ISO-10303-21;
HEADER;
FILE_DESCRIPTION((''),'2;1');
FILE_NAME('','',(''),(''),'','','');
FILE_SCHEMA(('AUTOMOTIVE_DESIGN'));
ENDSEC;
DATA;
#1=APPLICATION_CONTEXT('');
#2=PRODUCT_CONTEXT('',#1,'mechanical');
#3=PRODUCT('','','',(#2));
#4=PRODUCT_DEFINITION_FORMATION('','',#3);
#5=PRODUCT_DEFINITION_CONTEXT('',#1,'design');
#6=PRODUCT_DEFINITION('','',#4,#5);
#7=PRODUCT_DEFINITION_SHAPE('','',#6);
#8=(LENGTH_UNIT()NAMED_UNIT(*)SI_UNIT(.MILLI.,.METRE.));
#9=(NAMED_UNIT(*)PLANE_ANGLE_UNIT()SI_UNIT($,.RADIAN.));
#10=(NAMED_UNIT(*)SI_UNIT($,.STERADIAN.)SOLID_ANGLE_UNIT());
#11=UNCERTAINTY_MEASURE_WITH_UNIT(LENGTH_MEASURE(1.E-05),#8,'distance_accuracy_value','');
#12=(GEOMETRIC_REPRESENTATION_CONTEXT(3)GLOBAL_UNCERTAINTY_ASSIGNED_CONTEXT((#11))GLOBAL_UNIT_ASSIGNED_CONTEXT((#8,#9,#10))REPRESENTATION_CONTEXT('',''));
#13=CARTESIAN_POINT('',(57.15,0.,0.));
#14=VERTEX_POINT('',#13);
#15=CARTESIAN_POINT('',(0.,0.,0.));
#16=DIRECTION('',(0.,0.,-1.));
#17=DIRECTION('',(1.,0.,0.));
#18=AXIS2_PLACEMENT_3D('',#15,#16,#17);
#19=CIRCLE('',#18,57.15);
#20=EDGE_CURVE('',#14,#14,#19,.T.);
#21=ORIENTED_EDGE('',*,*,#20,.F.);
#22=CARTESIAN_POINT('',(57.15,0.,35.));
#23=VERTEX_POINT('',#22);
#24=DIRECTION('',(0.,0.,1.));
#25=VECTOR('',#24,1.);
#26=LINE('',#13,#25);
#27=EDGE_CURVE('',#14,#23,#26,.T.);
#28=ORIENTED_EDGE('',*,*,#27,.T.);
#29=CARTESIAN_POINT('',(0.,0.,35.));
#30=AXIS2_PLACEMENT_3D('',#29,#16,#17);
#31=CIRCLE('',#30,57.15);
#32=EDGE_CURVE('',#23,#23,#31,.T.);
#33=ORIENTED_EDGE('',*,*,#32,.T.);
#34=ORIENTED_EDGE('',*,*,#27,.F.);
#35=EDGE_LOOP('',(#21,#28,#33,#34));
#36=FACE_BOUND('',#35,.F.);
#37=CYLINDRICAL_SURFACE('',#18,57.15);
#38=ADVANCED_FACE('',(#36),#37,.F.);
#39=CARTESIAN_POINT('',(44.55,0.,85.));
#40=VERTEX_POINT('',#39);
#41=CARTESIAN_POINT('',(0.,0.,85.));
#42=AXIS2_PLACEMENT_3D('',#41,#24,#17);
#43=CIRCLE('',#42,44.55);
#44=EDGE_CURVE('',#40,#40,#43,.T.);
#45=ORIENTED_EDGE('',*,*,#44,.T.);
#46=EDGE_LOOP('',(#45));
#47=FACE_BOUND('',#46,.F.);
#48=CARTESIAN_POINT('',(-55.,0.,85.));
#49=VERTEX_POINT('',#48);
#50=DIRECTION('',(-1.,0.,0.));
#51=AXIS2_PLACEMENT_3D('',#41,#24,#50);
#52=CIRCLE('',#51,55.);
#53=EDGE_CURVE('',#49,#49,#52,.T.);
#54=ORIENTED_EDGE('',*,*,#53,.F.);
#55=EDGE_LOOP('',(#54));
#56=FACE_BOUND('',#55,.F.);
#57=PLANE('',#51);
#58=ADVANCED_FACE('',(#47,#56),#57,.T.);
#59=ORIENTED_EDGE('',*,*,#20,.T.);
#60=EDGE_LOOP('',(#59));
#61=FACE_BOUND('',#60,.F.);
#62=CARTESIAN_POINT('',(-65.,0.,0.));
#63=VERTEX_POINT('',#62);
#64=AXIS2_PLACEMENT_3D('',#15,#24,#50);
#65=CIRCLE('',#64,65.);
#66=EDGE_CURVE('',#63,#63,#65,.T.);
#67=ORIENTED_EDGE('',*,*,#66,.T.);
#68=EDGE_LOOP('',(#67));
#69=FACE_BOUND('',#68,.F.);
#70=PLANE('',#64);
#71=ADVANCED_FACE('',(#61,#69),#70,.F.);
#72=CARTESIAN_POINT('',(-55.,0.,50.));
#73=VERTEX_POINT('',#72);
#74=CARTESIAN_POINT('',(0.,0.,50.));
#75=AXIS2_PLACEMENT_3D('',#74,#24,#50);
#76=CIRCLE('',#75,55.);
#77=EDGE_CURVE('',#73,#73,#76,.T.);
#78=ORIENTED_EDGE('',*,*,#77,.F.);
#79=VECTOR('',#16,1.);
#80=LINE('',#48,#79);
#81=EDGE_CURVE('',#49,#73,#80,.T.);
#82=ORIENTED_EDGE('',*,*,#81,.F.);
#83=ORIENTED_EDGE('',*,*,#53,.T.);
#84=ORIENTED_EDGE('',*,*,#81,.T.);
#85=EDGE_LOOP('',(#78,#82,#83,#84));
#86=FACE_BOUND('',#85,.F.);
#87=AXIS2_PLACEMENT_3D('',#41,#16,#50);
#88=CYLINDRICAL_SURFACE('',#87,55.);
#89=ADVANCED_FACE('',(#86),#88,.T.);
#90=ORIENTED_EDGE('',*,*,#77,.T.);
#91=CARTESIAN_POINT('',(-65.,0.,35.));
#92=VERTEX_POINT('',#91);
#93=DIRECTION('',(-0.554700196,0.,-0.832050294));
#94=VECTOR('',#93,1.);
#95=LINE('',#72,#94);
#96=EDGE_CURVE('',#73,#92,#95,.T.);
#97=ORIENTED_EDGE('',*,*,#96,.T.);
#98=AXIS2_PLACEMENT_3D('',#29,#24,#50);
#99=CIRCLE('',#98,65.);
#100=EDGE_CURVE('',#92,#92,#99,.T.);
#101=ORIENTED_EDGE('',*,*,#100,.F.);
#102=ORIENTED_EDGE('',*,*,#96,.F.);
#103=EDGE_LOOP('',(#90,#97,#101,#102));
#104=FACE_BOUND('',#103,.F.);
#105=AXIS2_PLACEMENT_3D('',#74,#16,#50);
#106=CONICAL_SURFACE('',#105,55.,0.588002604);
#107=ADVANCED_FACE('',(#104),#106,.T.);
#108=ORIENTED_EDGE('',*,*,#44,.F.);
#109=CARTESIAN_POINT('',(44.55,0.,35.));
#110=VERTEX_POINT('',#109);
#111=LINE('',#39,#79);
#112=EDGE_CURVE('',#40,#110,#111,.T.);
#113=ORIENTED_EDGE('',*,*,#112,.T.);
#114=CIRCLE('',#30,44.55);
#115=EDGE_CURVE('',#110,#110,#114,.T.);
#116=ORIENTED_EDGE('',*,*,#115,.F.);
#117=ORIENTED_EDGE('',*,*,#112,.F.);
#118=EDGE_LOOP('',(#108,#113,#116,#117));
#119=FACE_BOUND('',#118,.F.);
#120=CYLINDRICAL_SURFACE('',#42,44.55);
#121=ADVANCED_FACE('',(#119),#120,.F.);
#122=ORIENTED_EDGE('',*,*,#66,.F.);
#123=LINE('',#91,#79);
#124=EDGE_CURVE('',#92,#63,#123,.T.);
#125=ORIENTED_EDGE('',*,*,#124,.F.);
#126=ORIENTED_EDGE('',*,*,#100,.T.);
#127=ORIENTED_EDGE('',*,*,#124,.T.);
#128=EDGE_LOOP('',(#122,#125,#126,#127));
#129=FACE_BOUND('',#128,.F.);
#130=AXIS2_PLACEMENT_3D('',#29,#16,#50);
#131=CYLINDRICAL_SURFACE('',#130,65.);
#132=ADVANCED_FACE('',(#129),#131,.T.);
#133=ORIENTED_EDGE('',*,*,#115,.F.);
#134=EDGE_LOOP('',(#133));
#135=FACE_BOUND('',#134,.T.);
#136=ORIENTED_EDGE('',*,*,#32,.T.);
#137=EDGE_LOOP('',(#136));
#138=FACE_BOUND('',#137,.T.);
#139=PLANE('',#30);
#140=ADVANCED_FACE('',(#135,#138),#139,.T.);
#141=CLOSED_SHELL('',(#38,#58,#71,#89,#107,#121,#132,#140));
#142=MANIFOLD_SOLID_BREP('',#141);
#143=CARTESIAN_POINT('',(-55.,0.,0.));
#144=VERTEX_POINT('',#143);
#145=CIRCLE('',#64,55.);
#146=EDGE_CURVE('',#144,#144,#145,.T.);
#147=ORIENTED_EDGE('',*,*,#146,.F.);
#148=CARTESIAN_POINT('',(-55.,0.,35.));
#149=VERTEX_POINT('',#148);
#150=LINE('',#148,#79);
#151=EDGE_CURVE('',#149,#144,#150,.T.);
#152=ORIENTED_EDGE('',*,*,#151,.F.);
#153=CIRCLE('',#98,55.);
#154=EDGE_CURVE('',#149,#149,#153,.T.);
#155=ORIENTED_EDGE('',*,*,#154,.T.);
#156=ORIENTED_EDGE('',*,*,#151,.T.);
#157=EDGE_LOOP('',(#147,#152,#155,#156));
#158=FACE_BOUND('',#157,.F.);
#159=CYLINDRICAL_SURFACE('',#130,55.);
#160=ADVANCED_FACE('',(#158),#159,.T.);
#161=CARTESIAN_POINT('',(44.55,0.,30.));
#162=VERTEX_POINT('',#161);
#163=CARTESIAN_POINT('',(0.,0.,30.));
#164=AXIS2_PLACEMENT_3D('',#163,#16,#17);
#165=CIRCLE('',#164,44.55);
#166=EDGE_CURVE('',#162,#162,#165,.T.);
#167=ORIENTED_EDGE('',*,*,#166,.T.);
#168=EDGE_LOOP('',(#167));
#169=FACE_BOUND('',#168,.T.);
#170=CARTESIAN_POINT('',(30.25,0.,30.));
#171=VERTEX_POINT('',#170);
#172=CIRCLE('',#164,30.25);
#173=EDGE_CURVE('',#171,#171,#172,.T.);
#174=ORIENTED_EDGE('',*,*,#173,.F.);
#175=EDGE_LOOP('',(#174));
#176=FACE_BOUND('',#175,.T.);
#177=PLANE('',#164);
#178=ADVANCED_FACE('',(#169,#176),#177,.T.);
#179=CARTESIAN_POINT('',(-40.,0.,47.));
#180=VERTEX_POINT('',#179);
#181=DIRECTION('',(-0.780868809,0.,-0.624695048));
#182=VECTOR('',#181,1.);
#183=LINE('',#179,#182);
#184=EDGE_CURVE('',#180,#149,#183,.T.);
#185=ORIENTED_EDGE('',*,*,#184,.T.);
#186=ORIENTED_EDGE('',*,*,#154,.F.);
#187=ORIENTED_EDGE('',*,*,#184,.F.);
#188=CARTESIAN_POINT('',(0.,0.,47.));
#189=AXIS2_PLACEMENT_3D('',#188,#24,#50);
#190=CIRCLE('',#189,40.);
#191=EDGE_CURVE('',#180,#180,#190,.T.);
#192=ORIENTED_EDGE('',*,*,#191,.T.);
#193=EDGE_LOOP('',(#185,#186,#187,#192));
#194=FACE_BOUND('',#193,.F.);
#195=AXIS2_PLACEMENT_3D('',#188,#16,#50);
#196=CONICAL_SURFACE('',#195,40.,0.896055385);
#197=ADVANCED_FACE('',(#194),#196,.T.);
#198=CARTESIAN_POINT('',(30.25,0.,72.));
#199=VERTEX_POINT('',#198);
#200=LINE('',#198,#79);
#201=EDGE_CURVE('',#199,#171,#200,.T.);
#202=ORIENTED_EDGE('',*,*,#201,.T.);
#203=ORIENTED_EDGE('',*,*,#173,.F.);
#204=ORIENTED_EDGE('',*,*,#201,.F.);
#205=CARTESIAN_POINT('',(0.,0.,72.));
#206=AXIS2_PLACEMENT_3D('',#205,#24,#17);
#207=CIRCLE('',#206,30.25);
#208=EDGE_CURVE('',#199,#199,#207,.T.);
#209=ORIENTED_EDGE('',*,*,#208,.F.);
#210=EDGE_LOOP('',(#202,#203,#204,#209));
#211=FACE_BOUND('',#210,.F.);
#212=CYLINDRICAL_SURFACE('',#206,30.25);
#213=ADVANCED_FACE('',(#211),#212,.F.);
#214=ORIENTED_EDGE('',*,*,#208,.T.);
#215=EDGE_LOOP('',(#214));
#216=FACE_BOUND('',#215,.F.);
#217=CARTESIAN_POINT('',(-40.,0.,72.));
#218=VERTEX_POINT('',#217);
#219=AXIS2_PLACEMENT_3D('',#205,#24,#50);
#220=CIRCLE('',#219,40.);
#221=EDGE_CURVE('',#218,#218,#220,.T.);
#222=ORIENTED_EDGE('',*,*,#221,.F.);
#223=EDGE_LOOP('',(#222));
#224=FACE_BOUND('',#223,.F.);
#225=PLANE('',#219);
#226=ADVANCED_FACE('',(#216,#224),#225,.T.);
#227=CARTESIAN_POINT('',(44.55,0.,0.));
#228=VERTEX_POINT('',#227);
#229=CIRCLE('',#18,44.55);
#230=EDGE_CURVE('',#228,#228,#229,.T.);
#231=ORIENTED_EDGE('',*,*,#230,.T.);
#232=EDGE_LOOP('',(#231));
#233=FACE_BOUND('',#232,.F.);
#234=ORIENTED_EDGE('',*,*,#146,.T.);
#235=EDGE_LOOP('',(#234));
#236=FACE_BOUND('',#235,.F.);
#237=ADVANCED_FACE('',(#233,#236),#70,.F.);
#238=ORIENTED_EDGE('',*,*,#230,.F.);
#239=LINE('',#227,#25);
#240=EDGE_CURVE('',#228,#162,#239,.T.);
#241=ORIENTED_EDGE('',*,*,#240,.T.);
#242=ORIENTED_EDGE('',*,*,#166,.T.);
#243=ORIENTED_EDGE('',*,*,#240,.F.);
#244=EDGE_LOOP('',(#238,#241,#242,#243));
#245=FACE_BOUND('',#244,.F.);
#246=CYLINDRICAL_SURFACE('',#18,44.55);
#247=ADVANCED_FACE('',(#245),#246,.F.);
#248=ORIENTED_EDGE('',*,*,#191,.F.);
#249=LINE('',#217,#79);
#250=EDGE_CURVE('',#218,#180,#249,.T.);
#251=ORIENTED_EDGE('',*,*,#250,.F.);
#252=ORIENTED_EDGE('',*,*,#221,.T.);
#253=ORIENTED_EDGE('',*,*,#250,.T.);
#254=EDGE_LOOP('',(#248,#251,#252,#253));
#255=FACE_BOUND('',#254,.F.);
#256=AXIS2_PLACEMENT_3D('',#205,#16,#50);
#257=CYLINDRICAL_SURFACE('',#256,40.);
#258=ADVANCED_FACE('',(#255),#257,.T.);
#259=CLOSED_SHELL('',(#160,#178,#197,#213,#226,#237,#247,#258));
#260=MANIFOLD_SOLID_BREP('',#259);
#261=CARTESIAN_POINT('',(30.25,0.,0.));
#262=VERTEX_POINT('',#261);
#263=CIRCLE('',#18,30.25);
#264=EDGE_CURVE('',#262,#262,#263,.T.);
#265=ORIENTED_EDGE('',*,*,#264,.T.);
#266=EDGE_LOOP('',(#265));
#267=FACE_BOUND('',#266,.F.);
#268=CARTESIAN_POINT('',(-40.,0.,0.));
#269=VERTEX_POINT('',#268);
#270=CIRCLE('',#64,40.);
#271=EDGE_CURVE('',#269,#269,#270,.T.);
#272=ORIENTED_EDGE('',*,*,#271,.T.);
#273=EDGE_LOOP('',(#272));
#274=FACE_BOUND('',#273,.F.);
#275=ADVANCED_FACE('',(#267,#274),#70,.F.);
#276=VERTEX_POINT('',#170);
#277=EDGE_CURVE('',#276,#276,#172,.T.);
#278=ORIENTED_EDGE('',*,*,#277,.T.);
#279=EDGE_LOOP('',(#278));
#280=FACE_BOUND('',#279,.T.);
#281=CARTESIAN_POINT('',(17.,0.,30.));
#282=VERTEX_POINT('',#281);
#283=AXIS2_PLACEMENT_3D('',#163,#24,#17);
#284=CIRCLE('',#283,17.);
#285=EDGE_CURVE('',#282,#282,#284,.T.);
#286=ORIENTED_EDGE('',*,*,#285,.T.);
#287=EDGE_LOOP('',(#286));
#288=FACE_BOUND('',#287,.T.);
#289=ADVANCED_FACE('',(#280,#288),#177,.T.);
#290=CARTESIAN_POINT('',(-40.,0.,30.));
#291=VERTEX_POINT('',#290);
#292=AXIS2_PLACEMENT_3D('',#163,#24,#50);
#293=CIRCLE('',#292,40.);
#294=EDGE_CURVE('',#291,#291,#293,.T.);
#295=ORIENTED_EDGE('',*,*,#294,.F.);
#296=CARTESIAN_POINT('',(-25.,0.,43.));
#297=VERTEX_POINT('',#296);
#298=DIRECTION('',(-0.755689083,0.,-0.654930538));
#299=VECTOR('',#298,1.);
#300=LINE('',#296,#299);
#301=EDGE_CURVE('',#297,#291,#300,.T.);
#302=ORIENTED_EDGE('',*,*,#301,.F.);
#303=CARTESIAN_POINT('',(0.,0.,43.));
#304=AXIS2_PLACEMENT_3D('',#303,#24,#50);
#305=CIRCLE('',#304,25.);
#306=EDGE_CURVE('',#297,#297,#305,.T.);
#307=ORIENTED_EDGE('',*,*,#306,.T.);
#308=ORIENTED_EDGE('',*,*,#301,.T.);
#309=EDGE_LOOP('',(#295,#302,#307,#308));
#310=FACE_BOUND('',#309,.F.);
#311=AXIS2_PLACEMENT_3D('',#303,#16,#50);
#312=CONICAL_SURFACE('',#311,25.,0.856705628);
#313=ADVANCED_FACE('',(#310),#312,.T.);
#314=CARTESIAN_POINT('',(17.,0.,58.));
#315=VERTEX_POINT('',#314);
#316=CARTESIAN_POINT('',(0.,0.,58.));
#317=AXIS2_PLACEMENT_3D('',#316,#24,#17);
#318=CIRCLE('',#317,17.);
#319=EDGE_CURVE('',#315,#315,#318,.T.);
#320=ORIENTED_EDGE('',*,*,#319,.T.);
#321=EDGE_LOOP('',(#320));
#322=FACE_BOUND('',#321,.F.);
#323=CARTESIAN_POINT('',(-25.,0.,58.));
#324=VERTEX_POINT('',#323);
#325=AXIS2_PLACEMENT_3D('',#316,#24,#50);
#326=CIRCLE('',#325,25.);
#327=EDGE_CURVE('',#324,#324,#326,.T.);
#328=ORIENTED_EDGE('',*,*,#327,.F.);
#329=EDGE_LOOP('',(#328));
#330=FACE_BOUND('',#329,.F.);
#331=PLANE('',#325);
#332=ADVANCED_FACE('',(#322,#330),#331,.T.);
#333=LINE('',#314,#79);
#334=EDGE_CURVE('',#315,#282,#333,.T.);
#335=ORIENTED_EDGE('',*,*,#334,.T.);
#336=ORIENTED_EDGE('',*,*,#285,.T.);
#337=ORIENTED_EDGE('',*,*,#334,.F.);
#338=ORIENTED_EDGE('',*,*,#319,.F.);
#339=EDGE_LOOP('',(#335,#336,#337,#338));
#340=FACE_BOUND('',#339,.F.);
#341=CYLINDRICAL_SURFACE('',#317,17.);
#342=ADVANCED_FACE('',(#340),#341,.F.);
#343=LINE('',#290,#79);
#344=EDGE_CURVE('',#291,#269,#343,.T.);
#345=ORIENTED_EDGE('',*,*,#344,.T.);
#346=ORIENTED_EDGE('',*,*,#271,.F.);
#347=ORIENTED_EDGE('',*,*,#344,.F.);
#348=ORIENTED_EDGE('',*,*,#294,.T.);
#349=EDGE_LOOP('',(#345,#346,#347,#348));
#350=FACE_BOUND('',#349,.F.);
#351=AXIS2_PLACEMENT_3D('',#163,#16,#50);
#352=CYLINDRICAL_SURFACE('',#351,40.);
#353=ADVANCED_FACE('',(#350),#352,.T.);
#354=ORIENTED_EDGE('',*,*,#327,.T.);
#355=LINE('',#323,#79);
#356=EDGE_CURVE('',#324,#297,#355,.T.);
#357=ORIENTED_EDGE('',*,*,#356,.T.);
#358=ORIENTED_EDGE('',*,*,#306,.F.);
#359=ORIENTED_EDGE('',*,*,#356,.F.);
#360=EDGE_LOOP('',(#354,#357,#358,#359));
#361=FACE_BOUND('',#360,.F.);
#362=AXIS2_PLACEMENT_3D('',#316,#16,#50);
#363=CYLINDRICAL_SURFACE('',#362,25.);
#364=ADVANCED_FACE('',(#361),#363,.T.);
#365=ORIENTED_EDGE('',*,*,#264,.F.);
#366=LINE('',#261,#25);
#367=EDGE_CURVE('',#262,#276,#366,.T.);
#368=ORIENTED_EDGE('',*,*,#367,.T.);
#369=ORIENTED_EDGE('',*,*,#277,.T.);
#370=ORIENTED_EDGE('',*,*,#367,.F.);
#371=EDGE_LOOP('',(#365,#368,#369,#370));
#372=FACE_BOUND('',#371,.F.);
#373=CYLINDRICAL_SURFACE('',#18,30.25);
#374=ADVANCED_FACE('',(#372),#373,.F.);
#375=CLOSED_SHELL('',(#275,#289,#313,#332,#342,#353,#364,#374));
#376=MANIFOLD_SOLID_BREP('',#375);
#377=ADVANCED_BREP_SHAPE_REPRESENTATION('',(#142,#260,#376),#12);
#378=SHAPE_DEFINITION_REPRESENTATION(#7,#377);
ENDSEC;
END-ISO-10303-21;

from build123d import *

# Parameters (mm, degrees)
F2_R      = 17
F4_DEPTH  = 58.001
F3_R      = 30.25
F5_DEPTH  = 30
F8_R      = 30.25
F9_DEPTH  = 72.001
F10_R     = 44.55
F10_R_2   = 30.25
F11_DEPTH = 30
F14_R     = 44.55
F15_DEPTH = 85.001
F16_R     = 57.15
F16_R_2   = 44.55
F17_DEPTH = 35


with BuildPart() as f1:
    # F0 (on Front) → F1 (revolve)
    with BuildSketch(Plane.XZ):
        Polygon((-40, 0), (0, 0), (0, 58), (-25, 58), (-25, 43), (-40, 30), align=None)
    revolve(axis=Axis((0, 0, 29), (0, 0, 1)))

    # F2 (on face) → F4 (cut, through all)
    with BuildSketch(Plane.XY.offset(58)):
        Circle(F2_R)
    extrude(amount=-F4_DEPTH, mode=Mode.SUBTRACT)

    # F3 (on face) → F5 (cut)
    with BuildSketch(Plane(origin=(0, 0, 0), x_dir=(1, 0, 0), z_dir=(0, 0, -1))):
        Circle(F3_R)
    extrude(amount=-F5_DEPTH, mode=Mode.SUBTRACT)


with BuildPart() as f7:
    # F6 (on Front) → F7 (revolve)
    with BuildSketch(Plane.XZ):
        Polygon((-55, 0), (0, 0), (0, 72), (-40, 72), (-40, 47), (-55, 35), align=None)
    revolve(axis=Axis((0, 0, 36), (0, 0, 1)))

    # F8 (on face) → F9 (cut, through all)
    with BuildSketch(Plane.XY.offset(72)):
        Circle(F8_R)
    extrude(amount=-F9_DEPTH, mode=Mode.SUBTRACT)

    # F10 (on face) → F11 (cut)
    with BuildSketch(Plane(origin=(0, 0, 0), x_dir=(1, 0, 0), z_dir=(0, 0, -1))):
        Circle(F10_R)
        Circle(F10_R_2, mode=Mode.SUBTRACT)
    extrude(amount=-F11_DEPTH, mode=Mode.SUBTRACT)


with BuildPart() as f13:
    # F12 (on Front) → F13 (revolve)
    with BuildSketch(Plane.XZ):
        Polygon((-65, 0), (0, 0), (0, 85), (-55, 85), (-55, 50), (-65, 35), align=None)
    revolve(axis=Axis((0, 0, 42.5), (0, 0, 1)))

    # F14 (on face) → F15 (cut, through all)
    with BuildSketch(Plane.XY.offset(85)):
        Circle(F14_R)
    extrude(amount=-F15_DEPTH, mode=Mode.SUBTRACT)

    # F16 (on face) → F17 (cut)
    with BuildSketch(Plane(origin=(0, 0, 0), x_dir=(1, 0, 0), z_dir=(0, 0, -1))):
        Circle(F16_R)
        Circle(F16_R_2, mode=Mode.SUBTRACT)
    extrude(amount=-F17_DEPTH, mode=Mode.SUBTRACT)


solid = Compound([f1.part, f7.part, f13.part])
